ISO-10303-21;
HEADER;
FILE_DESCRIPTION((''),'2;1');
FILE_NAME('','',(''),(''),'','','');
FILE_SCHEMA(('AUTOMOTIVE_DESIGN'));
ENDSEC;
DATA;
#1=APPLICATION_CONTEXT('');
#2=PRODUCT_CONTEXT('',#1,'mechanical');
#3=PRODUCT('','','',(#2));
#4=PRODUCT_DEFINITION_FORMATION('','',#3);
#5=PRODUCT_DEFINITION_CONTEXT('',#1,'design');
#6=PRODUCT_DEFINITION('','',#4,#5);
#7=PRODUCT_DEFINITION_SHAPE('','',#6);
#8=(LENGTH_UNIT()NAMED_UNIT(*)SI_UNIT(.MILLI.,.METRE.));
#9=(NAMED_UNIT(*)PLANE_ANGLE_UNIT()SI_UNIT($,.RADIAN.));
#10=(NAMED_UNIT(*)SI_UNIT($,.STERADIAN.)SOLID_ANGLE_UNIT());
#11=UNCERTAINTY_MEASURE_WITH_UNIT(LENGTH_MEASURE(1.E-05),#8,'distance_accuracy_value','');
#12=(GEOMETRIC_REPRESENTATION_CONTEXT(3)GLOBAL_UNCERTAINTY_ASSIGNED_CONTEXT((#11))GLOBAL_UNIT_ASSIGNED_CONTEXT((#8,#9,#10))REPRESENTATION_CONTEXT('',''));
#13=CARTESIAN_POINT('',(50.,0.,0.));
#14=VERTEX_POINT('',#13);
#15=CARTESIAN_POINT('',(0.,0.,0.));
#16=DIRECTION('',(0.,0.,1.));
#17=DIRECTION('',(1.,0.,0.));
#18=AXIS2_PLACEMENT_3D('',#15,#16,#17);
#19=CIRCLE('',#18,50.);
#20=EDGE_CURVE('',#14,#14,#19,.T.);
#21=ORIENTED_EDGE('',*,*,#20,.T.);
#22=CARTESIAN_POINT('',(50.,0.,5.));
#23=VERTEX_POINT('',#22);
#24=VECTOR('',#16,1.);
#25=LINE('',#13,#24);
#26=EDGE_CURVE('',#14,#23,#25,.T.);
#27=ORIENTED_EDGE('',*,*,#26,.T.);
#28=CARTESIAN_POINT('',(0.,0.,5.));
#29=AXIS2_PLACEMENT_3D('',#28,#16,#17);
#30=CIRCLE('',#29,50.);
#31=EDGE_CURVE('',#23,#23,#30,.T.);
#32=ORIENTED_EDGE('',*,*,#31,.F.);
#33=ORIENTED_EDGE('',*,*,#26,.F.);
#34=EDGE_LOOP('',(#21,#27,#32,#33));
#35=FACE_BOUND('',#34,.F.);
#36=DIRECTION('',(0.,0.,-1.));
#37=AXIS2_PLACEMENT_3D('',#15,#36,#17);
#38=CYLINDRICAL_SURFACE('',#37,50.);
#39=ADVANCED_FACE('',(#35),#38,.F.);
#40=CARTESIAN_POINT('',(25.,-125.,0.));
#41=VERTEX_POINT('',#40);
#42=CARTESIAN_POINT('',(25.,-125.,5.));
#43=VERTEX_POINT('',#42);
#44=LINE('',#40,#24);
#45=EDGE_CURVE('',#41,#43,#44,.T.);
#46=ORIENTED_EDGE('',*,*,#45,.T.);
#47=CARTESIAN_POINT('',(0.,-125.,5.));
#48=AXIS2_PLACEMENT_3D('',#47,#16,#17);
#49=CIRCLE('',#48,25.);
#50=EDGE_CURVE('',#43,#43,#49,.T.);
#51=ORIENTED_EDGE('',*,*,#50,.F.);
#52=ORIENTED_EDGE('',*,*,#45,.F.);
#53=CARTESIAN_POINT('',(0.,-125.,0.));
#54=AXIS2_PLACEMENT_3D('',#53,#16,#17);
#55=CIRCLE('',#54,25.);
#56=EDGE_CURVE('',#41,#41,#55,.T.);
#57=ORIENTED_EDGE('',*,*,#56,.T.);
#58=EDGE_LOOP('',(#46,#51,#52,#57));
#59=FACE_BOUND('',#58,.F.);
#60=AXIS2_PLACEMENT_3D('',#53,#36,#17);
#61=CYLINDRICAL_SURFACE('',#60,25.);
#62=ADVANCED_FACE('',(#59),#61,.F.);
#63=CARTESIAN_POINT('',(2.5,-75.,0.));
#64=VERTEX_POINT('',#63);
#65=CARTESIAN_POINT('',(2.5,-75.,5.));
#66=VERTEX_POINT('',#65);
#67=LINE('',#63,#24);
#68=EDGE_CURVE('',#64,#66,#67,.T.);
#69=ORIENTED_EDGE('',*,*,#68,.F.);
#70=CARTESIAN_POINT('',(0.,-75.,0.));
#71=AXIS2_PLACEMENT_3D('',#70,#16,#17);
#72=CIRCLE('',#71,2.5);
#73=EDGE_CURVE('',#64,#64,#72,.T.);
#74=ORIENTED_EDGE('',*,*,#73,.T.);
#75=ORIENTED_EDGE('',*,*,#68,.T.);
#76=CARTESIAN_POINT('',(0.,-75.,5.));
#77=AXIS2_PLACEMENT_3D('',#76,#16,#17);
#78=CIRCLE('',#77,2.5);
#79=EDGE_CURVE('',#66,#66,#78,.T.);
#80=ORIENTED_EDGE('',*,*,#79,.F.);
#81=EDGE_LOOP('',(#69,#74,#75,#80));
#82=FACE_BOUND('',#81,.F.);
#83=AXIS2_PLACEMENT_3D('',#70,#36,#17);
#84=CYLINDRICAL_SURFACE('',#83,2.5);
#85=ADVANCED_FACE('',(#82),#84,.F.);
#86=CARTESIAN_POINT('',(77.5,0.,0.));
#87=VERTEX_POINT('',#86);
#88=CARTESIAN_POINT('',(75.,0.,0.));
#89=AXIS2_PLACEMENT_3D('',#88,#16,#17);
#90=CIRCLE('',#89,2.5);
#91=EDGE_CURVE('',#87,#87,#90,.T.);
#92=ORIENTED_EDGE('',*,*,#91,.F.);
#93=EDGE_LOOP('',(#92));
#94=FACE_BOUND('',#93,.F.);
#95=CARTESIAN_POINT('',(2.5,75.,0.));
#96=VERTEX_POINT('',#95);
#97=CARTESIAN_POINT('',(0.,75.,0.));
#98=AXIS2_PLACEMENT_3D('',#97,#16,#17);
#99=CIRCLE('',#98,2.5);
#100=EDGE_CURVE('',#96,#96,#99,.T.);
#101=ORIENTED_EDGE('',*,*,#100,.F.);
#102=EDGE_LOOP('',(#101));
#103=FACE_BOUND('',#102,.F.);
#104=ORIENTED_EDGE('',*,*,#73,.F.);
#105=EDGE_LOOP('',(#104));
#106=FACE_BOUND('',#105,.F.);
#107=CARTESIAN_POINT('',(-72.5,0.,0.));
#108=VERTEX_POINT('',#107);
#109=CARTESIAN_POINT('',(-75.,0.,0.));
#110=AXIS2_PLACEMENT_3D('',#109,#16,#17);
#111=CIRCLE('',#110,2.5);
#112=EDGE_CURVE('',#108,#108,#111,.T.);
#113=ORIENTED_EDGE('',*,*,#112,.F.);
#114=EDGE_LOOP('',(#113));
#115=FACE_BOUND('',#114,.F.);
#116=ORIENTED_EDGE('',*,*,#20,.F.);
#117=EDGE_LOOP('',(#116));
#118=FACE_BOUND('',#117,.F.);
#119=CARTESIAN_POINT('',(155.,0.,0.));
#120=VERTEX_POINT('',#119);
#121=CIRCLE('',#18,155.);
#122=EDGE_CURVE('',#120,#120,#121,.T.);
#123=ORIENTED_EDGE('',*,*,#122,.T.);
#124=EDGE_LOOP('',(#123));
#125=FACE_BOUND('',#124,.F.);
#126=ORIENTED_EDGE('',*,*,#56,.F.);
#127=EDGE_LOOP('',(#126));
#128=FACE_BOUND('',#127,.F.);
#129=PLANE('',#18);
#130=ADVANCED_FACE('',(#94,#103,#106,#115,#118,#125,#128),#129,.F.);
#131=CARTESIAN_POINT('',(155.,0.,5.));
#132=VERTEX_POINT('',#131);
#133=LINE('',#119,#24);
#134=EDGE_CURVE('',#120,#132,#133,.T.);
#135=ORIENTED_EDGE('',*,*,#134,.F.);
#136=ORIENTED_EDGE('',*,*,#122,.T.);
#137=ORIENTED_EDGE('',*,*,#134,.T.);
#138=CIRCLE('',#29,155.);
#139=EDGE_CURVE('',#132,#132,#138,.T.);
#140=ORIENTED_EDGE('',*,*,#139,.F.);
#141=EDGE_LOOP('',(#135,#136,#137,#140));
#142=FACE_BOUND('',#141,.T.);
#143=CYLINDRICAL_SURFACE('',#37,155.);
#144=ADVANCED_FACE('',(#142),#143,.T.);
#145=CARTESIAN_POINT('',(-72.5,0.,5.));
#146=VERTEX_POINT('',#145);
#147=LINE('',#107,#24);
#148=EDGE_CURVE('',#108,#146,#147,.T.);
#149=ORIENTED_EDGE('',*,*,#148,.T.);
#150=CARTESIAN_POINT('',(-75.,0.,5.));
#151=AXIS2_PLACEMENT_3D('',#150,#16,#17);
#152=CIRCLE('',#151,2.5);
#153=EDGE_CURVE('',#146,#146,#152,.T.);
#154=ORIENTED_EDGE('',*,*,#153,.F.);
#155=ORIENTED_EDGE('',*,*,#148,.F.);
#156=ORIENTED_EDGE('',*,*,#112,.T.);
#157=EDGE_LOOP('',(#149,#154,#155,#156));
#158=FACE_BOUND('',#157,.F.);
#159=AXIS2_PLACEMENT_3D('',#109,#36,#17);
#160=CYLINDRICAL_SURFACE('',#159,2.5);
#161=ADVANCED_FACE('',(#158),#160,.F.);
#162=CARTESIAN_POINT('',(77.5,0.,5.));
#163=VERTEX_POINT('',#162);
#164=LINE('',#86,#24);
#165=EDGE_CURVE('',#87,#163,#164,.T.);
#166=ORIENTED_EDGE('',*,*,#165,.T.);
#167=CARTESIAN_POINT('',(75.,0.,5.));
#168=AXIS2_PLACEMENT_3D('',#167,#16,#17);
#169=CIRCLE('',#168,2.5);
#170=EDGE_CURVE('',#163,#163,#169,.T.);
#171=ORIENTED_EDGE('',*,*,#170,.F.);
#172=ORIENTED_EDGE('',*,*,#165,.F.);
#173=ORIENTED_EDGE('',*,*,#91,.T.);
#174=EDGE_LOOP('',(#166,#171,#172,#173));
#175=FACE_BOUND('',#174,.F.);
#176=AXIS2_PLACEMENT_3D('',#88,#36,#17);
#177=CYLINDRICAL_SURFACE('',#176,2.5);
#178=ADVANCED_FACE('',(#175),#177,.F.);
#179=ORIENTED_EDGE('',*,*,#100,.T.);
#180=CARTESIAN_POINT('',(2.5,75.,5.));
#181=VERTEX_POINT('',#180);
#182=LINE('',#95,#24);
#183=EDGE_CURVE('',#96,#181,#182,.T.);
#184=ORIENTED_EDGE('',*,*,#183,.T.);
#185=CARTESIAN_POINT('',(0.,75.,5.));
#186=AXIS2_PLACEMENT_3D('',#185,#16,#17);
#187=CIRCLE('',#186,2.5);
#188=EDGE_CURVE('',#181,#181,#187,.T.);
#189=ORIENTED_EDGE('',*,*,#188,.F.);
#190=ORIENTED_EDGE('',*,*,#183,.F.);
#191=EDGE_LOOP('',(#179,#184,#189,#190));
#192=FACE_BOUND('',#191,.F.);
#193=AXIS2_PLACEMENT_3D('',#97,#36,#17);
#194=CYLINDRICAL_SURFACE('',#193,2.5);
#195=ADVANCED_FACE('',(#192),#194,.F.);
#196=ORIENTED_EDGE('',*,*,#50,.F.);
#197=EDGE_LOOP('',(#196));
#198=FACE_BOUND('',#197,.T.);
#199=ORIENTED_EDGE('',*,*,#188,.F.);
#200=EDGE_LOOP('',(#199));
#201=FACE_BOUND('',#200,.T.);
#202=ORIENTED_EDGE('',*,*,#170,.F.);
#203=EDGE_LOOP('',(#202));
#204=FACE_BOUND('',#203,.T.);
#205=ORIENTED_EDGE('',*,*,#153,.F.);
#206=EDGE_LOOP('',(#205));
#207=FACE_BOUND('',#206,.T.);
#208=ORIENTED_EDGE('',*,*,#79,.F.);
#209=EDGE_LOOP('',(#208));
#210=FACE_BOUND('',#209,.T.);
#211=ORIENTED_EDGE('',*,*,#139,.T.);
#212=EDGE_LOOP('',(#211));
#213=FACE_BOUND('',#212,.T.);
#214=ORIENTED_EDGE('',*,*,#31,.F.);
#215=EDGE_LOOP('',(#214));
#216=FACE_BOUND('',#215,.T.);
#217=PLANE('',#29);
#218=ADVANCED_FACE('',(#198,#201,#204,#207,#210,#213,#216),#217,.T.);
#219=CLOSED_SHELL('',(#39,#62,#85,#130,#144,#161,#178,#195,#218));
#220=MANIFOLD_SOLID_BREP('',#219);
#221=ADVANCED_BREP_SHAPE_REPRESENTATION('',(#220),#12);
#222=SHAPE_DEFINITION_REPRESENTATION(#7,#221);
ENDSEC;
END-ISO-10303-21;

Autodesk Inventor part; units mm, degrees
ref_plane "YZ Plane" through (0, 0, 0) normal (1, 0, 0) x (0, 1, 0)
ref_plane "XZ Plane" through (0, 0, 0) normal (0, 1, 0) x (-1, 0, 0)
ref_plane "XY Plane" through (0, 0, 0) normal (0, 0, 1) x (1, 0, 0)
sketch "Sketch1" plane through (0, 0, 0) normal (0, 0, 1) x (1, 0, 0)
  circle A0 centre (0, 0) radius 150
  circle A1 centre (0, 0) radius 100
  circle A2 centre (0, 0) radius 155
  circle A3 centre (0, -125) radius 25
  circle A4 centre (0, 0) radius 87.5
  circle A5 centre (0, 0) radius 75
  circle A6 centre (0, 0) radius 50
  circle A7 centre (75, 0) radius 2.5
  circle A8 centre (0, -75) radius 2.5
  circle A9 centre (0, 75) radius 2.5
  circle A10 centre (-75, 0) radius 2.5
  point P0 (0, -150)
  point P1 (0, -100)
  dimension "d0" = 300
  dimension "d1" = 200
  dimension "d2" = 310
  dimension "d3" = 50
  dimension "d8" = 175
  dimension "d9" = 150
  dimension "d10" = 100
  dimension "d11" = 5
  dimension "d12" = 5
  dimension "d13" = 5
  dimension "d14" = 5
extrude "Extrusion1" add sketch "Sketch1" along normal blind 5 contours A1 | A0 | A2 | A4 | A7 A5 A8 A10 A9
equation "\"d0\" = 6 * Product_dia"
equation "\"d1\" = 4 * Product_dia"
equation "\"d3\" = Product_dia"
equation "\"d8\" = 3.5 * Product_dia"
equation "\"d12\" = d11"
equation "\"d13\" = d11"
equation "\"d14\" = d11"
equation "\"Product_dia\" = 50"
equation "\"GridTotalSize\" = 63"
equation "\"GridBorderThickness\" = 5"
equation "\"GridBorderFillets\" = 7"
equation "\"BaseTotalWidth\" = 352"
equation "\"GridProcutClearance\" = 3"
equation "\"ProductBaseHeight\" = 35"
properties material "Steel, Paint Finish, Blue"
